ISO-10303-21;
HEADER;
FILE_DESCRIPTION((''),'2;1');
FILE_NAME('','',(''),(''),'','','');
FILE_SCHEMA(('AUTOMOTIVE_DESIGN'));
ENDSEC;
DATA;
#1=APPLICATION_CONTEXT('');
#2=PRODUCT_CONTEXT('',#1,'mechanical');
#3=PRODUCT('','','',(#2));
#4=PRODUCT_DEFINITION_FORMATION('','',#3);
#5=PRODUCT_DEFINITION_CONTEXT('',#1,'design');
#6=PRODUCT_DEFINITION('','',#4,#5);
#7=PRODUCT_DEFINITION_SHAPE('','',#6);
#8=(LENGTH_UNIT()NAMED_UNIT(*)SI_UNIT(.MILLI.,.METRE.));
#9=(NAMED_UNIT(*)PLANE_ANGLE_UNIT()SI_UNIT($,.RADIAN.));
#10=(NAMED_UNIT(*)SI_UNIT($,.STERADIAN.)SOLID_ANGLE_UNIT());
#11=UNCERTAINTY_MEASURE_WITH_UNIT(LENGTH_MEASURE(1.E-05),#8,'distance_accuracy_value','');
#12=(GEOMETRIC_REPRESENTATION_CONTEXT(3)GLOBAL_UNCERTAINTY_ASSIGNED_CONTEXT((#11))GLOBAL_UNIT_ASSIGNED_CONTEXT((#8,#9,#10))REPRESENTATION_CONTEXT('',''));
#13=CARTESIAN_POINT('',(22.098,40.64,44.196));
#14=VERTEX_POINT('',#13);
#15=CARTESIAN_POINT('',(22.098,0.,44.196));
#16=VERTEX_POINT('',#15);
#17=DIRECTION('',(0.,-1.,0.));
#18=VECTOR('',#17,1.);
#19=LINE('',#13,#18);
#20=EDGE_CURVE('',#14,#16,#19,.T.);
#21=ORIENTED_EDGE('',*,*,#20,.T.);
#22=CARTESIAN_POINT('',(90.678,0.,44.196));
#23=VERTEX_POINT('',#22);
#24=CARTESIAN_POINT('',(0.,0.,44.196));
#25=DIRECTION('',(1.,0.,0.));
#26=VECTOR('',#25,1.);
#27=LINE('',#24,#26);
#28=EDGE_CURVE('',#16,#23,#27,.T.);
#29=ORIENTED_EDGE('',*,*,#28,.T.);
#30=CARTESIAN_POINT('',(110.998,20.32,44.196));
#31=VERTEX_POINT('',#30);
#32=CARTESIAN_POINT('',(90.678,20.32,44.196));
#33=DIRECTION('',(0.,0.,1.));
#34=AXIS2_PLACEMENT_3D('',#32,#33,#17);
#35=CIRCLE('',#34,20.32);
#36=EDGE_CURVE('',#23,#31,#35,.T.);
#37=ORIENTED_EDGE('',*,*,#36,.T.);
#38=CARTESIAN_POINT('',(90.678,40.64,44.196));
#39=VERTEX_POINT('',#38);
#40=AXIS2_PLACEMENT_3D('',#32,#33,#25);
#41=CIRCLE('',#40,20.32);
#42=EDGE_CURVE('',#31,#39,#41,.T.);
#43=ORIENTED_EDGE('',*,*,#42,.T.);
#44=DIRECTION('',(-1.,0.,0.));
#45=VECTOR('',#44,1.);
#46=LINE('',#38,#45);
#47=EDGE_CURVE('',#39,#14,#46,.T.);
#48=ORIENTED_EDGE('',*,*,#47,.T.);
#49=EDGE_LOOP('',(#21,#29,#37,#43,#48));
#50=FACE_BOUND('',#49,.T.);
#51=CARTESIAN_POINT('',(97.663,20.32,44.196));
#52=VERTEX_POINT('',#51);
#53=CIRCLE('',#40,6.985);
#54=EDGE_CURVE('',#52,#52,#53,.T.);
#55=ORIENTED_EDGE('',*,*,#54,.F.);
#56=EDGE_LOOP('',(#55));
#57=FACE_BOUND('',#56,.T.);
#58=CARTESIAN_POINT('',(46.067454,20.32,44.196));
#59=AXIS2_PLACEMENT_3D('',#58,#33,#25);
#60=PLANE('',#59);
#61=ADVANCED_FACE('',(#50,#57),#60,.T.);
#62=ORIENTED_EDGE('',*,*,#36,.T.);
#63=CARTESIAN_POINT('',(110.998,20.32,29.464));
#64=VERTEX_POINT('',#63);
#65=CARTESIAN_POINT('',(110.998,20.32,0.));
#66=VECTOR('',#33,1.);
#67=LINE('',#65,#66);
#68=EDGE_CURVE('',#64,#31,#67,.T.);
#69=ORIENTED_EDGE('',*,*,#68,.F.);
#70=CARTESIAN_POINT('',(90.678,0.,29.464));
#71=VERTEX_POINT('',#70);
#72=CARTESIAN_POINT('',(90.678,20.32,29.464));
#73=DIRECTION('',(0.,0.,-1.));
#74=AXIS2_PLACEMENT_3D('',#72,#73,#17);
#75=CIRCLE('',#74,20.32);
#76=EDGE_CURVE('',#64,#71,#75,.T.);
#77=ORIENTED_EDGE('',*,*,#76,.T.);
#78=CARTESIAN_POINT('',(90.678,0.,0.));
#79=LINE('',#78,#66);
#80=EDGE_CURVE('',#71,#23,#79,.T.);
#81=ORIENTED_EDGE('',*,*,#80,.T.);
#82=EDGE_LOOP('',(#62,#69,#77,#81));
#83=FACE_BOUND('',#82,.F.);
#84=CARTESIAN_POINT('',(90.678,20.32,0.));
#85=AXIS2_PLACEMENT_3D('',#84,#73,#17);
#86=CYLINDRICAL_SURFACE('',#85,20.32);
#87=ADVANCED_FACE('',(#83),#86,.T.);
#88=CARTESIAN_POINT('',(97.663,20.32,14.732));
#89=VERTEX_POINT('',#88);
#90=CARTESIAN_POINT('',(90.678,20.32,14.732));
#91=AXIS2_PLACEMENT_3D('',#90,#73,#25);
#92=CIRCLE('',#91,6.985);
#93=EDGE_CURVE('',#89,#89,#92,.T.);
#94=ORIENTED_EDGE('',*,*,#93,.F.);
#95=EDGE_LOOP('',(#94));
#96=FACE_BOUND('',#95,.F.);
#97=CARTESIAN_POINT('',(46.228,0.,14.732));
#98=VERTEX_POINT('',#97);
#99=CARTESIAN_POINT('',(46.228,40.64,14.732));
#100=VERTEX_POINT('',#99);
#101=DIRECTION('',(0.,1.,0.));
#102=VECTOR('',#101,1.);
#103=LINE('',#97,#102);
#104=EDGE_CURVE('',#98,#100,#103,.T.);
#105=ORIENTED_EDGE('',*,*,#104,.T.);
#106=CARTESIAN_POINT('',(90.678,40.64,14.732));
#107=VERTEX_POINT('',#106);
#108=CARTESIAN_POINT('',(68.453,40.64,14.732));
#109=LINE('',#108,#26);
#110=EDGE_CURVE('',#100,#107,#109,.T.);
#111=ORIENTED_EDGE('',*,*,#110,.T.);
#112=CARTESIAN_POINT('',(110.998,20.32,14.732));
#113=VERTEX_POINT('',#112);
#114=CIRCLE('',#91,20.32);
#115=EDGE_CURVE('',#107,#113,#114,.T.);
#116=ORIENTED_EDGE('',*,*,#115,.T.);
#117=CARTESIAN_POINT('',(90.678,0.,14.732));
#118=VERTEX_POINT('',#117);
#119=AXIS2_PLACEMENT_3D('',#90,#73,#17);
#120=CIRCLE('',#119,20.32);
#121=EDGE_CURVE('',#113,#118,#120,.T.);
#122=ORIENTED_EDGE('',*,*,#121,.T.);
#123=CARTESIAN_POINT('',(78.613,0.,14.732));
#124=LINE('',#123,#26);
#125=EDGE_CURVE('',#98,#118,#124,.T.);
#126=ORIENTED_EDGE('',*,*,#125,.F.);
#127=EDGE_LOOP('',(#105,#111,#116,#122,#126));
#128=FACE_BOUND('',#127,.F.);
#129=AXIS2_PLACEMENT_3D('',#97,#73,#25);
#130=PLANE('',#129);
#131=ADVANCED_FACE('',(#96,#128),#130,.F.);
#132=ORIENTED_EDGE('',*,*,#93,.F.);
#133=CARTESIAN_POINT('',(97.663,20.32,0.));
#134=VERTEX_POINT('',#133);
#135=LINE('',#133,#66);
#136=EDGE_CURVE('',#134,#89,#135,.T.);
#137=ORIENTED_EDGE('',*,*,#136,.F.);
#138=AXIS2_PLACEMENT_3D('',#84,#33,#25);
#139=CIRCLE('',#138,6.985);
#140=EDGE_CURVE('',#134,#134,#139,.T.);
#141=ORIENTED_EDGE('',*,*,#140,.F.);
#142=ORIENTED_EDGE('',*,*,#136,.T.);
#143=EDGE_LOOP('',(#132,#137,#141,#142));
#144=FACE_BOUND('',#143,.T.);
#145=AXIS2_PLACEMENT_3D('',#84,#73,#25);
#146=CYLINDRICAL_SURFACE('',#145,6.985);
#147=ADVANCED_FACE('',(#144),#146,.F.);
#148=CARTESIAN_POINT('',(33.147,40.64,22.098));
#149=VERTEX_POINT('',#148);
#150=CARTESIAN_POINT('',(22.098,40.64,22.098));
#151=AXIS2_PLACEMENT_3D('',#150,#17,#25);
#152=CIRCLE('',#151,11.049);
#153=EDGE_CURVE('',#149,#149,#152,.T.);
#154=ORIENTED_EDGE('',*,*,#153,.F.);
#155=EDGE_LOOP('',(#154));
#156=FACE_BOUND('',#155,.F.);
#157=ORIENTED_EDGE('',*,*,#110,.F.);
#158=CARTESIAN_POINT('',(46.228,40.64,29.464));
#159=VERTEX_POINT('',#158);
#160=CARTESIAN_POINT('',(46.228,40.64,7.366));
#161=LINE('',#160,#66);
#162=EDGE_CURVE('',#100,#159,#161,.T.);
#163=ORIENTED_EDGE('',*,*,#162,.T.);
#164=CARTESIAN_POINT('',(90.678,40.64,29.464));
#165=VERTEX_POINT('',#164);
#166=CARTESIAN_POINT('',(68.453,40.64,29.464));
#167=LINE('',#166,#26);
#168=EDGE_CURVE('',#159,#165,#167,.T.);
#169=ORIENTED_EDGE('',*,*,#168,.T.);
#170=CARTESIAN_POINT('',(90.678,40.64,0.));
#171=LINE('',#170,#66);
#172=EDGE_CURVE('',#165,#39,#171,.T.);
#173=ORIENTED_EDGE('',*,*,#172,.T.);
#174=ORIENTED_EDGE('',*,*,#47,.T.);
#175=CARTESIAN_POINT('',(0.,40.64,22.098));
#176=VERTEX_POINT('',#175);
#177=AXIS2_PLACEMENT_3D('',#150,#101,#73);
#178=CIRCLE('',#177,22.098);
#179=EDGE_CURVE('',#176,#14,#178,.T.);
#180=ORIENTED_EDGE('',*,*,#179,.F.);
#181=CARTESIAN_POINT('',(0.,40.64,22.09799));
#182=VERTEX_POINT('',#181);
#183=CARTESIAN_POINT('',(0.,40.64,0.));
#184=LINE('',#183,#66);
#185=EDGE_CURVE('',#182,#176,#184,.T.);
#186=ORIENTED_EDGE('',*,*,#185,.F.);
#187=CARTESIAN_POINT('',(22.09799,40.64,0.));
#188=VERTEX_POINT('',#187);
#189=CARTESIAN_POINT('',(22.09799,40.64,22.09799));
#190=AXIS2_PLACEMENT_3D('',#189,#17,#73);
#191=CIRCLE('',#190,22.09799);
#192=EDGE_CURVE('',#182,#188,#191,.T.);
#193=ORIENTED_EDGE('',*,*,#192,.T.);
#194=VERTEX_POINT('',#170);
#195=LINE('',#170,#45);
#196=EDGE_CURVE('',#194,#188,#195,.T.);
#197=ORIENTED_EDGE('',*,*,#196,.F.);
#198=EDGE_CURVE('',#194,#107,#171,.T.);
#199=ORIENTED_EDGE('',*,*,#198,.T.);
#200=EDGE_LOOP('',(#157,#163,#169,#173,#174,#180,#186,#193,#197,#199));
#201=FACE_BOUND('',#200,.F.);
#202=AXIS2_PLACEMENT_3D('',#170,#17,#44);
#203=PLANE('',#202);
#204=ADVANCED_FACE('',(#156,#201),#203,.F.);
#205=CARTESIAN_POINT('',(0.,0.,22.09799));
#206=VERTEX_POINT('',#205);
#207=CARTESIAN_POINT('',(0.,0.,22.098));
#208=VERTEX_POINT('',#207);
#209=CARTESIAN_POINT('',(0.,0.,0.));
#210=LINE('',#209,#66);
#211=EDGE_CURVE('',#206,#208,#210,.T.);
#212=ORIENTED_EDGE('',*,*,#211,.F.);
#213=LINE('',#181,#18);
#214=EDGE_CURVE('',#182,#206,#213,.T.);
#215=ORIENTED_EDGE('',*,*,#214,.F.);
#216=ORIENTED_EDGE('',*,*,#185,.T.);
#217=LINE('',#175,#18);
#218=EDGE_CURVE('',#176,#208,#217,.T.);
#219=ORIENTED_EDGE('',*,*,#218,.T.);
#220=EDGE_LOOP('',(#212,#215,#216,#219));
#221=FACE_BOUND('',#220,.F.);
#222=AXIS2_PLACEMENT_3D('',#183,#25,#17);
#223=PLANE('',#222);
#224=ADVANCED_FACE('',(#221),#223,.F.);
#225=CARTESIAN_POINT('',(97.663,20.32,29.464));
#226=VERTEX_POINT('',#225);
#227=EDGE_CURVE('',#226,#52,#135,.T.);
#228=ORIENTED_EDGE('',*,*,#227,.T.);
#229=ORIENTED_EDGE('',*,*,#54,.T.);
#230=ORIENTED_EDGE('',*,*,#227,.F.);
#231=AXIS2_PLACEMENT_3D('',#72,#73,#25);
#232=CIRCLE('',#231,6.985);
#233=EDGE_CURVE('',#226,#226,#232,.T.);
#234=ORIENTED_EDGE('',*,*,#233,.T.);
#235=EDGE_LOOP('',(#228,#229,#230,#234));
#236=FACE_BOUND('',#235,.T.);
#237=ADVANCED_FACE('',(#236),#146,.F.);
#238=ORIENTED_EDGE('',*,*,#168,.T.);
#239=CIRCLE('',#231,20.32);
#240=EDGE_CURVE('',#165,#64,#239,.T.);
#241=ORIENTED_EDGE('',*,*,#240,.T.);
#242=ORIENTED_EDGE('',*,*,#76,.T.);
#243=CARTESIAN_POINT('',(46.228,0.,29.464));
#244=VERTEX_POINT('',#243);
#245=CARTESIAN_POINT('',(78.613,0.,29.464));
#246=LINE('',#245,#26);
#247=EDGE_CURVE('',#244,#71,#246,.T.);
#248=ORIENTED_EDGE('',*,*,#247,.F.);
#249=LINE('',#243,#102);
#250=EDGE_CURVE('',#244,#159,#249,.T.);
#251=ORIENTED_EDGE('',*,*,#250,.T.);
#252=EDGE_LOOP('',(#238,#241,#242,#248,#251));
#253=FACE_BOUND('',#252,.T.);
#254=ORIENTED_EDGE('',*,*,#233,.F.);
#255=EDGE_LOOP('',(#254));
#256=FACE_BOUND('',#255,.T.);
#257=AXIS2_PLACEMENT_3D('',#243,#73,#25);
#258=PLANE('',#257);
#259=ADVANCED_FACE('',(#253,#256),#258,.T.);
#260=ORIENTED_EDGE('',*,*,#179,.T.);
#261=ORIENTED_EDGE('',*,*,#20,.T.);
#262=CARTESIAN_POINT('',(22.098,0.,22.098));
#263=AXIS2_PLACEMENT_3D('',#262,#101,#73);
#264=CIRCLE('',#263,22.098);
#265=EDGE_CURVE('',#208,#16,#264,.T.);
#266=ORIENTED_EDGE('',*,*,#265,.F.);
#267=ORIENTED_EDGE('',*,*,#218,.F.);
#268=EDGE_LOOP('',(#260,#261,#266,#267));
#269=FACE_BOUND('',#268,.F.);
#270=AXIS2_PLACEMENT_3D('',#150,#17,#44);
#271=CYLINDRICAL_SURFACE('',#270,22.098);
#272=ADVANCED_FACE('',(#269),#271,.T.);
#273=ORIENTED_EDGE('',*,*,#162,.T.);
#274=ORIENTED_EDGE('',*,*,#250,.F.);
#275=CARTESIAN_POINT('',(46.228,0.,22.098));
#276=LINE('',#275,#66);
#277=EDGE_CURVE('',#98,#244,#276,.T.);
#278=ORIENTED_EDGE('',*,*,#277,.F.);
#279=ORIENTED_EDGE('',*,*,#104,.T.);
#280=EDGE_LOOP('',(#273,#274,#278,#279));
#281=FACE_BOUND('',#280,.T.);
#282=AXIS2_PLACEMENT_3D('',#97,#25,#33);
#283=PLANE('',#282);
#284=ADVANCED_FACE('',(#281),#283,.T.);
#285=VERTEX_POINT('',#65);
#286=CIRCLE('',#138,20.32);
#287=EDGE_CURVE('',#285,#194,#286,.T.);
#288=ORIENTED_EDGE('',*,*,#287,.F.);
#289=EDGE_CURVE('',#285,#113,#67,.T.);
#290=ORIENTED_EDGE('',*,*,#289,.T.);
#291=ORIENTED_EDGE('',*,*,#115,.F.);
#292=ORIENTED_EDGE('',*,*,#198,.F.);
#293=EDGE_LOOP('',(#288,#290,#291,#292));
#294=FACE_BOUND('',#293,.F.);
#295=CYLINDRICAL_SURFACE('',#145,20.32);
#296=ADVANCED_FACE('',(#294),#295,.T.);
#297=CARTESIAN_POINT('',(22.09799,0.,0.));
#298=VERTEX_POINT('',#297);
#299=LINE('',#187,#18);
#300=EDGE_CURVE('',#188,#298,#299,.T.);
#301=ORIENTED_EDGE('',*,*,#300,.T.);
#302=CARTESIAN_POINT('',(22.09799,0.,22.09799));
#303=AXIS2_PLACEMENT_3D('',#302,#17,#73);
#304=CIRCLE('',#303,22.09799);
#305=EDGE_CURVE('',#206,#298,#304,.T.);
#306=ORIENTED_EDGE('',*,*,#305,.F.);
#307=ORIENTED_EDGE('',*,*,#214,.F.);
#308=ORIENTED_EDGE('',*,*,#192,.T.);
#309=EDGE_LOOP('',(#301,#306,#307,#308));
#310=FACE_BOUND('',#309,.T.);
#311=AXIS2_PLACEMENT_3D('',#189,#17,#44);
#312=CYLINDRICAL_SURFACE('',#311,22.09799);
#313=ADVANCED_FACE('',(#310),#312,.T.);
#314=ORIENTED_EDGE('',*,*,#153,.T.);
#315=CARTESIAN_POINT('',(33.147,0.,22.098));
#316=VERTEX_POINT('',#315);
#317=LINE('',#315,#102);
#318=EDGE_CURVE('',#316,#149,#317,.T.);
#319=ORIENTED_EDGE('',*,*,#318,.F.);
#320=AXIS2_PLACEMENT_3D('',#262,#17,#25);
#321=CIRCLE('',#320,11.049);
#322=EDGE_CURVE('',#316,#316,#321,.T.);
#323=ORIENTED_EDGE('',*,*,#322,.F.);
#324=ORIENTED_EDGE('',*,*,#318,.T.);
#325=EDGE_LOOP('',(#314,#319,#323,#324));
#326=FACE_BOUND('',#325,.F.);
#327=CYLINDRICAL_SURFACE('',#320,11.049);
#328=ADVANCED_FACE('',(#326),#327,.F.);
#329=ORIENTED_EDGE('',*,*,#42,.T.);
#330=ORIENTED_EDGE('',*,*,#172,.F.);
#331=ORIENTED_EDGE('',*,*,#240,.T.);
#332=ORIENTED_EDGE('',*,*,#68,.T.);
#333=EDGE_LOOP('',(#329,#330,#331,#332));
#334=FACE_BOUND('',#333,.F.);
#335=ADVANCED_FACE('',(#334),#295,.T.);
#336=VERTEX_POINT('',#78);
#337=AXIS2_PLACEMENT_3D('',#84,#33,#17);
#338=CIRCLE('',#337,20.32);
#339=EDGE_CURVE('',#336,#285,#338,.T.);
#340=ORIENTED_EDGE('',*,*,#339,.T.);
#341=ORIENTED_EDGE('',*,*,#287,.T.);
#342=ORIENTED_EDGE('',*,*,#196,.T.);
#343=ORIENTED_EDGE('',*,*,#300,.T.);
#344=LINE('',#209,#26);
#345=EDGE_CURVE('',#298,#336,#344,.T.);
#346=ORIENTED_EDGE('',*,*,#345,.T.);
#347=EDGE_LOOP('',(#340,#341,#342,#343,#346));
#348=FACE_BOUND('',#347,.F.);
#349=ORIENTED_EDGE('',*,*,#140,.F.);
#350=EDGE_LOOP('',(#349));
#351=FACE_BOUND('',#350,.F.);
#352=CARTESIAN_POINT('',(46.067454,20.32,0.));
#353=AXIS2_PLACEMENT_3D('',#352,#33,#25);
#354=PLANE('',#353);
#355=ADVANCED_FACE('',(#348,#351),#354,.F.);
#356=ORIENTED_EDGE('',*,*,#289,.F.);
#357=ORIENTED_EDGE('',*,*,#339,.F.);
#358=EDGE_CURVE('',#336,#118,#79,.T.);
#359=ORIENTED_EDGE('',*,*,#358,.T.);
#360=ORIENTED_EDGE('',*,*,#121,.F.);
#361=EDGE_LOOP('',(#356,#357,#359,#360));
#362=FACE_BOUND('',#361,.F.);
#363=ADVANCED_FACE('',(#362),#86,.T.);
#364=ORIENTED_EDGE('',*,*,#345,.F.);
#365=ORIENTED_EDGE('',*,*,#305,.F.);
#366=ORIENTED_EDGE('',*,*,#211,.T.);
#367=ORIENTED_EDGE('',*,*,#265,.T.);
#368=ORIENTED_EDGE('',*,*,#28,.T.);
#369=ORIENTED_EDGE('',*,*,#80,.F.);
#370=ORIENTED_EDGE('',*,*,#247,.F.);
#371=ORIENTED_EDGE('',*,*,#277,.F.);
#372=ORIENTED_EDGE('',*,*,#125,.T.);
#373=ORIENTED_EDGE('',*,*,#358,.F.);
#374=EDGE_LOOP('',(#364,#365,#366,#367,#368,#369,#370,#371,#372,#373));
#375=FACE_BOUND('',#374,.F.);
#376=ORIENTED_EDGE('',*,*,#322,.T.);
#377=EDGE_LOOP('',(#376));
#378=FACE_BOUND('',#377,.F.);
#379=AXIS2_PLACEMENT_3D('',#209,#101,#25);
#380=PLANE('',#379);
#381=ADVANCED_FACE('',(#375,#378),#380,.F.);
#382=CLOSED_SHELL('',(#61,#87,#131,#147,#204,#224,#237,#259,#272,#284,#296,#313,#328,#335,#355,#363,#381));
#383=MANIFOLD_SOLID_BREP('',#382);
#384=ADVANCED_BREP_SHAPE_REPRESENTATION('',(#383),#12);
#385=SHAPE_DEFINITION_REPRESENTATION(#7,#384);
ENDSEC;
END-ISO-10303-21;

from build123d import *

# Parameters (mm, degrees)
F0_R     = 6.985
F2_DEPTH = 44.196
F1_R     = 11.049
F3_DEPTH = 40.641
F4_R     = 22.098
F5_R     = 22.09799
F1_W     = 64.77
F1_H     = 14.732
F6_DEPTH = 40.641


# Not quite as in the source:
# - a fillet or chamfer is up to 0.001 mm smaller than in the source, because OpenCascade refuses the exact size


with BuildPart() as f2:
    # F0 (on Top) → F2 (new body)
    with BuildSketch(Plane.XY):
        with BuildLine():
            Line((0, 40.64), (0, 0))
            Line((0, 0), (90.678, 0))
            ThreePointArc((90.678, 0), (70.358, 20.32), (90.678, 40.64))
            Line((90.678, 40.64), (0, 40.64))
        make_face()
        with BuildLine():
            ThreePointArc((90.678, 40.64), (70.358, 20.32), (90.678, 0))
            ThreePointArc((90.678, 0), (105.0464097937, 5.9515902063), (110.998, 20.32))
            ThreePointArc((110.998, 20.32), (105.0464097937, 34.6884097937), (90.678, 40.64))
        make_face()
        with Locations((90.678, 20.32)):
            Circle(F0_R, mode=Mode.SUBTRACT)
    extrude(amount=F2_DEPTH)

    # F1 (on Front) → F3 (cut, through all)
    with BuildSketch(Plane.XZ):
        with Locations((22.098, 22.098)):
            Circle(F1_R)
    extrude(amount=-F3_DEPTH, mode=Mode.SUBTRACT)

    # F4
    f4_edges = [f2.edges().sort_by_distance(p)[0] for p in [
        (0, 20.32, 44.196),
    ]]
    fillet(f4_edges, radius=F4_R)

    # F5 (radius 22.098 in the source; OpenCascade refuses exactly that, so slightly less here)
    f5_edges = [f2.edges().sort_by_distance(p)[0] for p in [
        (0, 20.32, 0),
    ]]
    fillet(f5_edges, radius=F5_R)

    # F1 (on Front) → F6 (cut, through all)
    with BuildSketch(Plane.XZ):
        with Locations((78.613, 22.098)):
            Rectangle(F1_W, F1_H)
    extrude(amount=-F6_DEPTH, mode=Mode.SUBTRACT)


solid = f2.part
